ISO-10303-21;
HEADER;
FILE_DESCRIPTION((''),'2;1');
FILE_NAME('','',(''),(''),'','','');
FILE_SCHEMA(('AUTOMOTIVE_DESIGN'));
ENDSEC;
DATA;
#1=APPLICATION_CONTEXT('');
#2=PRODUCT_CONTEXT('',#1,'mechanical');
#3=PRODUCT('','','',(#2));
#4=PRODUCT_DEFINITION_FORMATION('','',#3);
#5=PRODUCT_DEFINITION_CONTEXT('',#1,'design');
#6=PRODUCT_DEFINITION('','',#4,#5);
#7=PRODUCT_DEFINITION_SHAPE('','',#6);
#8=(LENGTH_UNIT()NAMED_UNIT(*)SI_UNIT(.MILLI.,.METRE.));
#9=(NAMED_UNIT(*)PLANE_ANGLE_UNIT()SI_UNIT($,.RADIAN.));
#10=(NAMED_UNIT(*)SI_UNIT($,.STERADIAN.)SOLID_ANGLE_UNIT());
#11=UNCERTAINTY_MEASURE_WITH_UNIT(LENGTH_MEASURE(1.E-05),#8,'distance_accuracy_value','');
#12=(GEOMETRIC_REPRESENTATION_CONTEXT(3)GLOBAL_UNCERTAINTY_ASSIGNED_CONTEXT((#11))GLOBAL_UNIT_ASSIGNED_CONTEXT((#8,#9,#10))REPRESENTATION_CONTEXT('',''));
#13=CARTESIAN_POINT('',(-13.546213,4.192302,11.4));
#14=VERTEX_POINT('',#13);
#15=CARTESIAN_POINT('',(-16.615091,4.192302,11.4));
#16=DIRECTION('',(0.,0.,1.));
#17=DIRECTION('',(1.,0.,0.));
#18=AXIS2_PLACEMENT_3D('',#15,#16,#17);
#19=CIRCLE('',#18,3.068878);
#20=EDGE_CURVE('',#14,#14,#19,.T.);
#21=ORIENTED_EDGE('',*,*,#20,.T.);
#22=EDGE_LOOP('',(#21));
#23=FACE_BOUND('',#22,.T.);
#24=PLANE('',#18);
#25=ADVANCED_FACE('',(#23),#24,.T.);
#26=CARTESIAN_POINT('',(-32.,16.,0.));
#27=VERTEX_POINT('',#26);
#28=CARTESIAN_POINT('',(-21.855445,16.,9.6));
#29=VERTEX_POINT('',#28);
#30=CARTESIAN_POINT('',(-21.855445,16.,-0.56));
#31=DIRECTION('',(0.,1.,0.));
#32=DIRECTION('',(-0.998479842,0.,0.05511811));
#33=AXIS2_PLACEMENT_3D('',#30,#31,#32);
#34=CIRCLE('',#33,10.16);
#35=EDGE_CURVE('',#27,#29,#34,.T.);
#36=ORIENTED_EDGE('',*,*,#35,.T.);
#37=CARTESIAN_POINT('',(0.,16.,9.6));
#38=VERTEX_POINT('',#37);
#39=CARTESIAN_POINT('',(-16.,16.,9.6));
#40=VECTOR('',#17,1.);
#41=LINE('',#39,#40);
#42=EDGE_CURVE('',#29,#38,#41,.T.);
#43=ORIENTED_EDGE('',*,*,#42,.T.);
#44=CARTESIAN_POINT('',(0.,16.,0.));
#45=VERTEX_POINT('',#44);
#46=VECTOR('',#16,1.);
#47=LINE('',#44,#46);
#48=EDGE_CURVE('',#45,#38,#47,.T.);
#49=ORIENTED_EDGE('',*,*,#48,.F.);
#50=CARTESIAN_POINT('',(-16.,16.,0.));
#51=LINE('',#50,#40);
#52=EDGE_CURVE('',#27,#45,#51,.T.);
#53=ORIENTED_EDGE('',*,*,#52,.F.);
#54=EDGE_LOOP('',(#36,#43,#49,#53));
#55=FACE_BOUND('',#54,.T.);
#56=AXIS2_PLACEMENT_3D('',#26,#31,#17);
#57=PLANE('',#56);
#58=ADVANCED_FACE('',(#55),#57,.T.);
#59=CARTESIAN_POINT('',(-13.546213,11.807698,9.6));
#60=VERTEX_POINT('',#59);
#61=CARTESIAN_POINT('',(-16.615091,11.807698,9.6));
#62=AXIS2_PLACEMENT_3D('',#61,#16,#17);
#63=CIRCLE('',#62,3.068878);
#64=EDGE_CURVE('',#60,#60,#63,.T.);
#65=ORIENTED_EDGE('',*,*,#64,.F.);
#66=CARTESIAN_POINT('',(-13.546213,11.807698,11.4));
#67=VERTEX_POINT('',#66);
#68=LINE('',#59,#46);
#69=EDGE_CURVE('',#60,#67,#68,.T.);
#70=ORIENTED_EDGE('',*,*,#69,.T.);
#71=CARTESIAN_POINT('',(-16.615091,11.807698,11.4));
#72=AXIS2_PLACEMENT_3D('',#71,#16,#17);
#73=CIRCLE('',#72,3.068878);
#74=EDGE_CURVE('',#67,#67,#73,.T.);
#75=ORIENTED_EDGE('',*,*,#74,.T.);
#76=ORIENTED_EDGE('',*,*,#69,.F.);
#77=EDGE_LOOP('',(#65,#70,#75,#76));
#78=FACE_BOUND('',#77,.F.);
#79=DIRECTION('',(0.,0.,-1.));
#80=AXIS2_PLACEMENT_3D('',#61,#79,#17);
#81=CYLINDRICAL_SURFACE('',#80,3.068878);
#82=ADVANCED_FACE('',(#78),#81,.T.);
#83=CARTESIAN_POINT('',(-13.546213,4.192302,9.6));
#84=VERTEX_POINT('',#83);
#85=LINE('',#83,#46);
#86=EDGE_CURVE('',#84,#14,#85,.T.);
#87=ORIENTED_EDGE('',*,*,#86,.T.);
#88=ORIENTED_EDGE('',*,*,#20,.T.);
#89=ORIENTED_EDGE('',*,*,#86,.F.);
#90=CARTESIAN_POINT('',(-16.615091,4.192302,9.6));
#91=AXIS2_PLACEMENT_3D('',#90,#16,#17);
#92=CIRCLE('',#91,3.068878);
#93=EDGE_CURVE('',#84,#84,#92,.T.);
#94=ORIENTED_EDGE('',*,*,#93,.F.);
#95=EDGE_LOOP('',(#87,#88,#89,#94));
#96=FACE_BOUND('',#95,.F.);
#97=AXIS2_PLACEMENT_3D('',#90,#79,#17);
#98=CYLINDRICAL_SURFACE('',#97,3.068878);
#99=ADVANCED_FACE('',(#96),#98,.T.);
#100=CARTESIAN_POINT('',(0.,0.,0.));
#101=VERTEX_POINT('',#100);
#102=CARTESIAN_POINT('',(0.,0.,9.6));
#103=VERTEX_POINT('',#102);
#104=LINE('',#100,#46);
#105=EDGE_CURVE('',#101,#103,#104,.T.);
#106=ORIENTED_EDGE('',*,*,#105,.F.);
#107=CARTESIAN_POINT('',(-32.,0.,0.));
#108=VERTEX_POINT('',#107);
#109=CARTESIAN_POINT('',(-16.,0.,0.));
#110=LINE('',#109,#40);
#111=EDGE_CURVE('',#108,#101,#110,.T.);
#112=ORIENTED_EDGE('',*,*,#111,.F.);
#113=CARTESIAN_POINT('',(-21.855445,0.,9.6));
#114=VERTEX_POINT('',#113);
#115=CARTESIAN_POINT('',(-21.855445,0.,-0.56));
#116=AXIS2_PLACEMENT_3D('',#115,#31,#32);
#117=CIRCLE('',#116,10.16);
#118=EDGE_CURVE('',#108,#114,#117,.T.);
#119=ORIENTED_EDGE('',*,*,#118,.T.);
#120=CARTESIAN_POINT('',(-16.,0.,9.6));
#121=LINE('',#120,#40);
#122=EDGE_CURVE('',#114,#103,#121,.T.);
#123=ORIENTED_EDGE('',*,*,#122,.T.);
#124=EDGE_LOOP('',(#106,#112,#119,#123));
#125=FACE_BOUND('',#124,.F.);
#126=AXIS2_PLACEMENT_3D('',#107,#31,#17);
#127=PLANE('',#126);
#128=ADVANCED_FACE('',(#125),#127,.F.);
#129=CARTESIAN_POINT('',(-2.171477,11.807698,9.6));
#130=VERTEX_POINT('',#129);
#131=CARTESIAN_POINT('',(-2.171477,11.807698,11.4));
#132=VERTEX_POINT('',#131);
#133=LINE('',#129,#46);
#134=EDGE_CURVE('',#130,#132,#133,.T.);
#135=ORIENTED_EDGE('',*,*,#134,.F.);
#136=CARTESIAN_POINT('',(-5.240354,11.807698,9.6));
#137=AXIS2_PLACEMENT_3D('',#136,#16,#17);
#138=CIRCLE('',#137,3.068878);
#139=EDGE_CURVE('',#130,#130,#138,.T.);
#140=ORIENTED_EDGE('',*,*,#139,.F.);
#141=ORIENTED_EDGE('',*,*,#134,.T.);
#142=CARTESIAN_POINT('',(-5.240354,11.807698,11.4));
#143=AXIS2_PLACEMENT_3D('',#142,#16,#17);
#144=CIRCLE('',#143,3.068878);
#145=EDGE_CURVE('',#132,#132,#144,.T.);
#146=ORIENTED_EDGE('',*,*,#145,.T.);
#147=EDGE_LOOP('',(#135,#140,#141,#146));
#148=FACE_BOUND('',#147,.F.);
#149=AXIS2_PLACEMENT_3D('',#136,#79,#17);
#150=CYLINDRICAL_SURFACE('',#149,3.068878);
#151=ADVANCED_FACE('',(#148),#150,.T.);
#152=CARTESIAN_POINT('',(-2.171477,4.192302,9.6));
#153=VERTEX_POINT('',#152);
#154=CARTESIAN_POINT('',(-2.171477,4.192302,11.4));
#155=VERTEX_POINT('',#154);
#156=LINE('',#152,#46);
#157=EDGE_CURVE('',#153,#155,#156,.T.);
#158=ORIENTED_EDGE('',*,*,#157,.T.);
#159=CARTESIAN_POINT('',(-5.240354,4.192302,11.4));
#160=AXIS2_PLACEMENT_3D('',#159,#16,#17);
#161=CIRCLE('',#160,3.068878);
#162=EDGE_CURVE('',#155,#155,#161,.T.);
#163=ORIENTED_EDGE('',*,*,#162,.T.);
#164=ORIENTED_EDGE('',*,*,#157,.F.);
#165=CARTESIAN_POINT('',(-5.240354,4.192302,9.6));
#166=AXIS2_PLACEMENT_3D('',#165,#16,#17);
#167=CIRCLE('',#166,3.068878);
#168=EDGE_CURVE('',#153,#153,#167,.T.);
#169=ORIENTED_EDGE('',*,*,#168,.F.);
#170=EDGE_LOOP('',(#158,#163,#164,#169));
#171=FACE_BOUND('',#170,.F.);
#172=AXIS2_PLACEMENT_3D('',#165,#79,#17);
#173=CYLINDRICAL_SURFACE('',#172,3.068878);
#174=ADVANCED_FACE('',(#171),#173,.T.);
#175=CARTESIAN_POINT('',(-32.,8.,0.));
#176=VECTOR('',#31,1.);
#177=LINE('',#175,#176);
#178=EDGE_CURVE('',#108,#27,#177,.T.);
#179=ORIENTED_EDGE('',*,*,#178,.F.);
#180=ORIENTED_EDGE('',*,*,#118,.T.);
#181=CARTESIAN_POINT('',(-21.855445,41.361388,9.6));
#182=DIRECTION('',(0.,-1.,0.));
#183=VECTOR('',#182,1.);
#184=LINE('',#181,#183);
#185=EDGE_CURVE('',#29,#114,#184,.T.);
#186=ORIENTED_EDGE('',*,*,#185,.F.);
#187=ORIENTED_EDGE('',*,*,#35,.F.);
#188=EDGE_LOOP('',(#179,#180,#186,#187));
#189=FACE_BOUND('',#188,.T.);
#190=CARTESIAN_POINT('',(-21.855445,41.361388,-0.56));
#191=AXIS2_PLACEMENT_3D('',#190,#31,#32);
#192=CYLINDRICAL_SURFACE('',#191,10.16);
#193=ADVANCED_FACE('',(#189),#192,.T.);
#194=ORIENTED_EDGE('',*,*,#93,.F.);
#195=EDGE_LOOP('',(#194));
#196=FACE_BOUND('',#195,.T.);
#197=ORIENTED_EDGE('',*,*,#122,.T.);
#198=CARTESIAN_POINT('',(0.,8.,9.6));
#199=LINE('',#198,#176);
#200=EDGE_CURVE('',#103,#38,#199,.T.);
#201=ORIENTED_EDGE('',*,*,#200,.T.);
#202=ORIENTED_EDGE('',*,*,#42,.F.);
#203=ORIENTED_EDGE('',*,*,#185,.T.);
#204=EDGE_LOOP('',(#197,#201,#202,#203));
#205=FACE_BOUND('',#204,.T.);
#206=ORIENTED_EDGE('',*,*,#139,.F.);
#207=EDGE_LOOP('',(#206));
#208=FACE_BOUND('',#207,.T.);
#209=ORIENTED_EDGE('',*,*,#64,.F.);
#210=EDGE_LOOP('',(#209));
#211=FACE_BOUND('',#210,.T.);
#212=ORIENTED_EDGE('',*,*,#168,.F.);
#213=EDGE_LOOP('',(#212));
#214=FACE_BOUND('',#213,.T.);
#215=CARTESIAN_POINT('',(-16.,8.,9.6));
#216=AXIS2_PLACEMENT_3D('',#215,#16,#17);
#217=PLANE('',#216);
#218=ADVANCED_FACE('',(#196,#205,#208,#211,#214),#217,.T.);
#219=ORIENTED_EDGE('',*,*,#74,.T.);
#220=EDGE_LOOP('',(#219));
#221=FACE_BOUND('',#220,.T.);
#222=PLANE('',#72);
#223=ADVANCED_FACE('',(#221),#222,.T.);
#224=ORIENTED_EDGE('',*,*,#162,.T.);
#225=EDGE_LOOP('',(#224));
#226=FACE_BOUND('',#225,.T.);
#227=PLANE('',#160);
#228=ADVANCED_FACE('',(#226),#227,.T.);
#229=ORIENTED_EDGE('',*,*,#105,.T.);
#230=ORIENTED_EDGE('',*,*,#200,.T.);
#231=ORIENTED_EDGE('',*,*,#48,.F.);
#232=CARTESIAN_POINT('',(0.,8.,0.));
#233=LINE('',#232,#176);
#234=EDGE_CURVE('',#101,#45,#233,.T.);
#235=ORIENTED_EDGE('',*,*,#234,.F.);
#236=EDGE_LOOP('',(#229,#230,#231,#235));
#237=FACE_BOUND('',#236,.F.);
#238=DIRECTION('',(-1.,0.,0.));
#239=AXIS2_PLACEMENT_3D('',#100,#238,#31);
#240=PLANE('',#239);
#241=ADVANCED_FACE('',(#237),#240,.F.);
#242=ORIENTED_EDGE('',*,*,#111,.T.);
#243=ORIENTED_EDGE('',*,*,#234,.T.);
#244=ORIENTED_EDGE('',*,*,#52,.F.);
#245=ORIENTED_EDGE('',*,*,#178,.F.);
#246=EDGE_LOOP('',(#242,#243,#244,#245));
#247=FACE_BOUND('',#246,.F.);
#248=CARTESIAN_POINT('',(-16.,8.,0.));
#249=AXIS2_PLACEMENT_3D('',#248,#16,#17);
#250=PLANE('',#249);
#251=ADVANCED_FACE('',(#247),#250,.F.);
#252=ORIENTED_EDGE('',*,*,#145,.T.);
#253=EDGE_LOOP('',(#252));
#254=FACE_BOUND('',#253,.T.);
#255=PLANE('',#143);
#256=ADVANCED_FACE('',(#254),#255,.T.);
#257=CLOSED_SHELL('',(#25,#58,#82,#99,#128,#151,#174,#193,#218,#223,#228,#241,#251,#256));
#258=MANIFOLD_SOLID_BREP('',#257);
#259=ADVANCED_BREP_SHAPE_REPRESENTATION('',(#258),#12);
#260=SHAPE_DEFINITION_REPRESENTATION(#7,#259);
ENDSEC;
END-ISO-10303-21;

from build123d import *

# Parameters (mm, degrees)
F0_W        = 32
F0_H        = 16
F1_DEPTH    = 9.6
F2_T1_DEPTH = 66.7227759493
F3_R        = 3.0688775333
F4_DEPTH    = 1.8


# Not quite as in the source:
# - a fillet or chamfer that OpenCascade refuses, or shapes differently, is made with other operations: its cross-section is extruded or revolved along the edge and cut away or added
# - a feature names something its author has since deleted; it is built from what else it names


with BuildPart() as f1:
    # F0 (on Top) → F1 (new body)
    with BuildSketch(Plane.XY):
        with Locations((-16, 8)):
            Rectangle(F0_W, F0_H)
    extrude(amount=F1_DEPTH)

    # F2: fillet of radius 10.16 on 1 edges, made by hand

    # F2_s2 → F2_t1 (cut)
    with BuildSketch(Plane.XZ.offset(-41.3613879746)):
        with BuildLine():
            ThreePointArc((-32, 0), (-28.8388537198, 6.819539281), (-21.8554448101, 9.6))
            Line((-21.8554448101, 9.6), (-32, 9.6))
            Line((-32, 9.6), (-32, 0))
        make_face()
    extrude(amount=F2_T1_DEPTH, mode=Mode.SUBTRACT)

    # F3 (on face) → F4 (join)
    with BuildSketch(Plane.XY.offset(9.6)):
        with Locations((-16.6150905888, 11.8076978251)):
            Circle(F3_R)
        with Locations((-5.2403542213, 11.8076978251)):
            Circle(F3_R)
        with Locations((-16.6150905888, 4.1923021749)):
            Circle(F3_R)
        with Locations((-5.2403542213, 4.1923021749)):
            Circle(F3_R)
    extrude(amount=F4_DEPTH)


solid = f1.part
